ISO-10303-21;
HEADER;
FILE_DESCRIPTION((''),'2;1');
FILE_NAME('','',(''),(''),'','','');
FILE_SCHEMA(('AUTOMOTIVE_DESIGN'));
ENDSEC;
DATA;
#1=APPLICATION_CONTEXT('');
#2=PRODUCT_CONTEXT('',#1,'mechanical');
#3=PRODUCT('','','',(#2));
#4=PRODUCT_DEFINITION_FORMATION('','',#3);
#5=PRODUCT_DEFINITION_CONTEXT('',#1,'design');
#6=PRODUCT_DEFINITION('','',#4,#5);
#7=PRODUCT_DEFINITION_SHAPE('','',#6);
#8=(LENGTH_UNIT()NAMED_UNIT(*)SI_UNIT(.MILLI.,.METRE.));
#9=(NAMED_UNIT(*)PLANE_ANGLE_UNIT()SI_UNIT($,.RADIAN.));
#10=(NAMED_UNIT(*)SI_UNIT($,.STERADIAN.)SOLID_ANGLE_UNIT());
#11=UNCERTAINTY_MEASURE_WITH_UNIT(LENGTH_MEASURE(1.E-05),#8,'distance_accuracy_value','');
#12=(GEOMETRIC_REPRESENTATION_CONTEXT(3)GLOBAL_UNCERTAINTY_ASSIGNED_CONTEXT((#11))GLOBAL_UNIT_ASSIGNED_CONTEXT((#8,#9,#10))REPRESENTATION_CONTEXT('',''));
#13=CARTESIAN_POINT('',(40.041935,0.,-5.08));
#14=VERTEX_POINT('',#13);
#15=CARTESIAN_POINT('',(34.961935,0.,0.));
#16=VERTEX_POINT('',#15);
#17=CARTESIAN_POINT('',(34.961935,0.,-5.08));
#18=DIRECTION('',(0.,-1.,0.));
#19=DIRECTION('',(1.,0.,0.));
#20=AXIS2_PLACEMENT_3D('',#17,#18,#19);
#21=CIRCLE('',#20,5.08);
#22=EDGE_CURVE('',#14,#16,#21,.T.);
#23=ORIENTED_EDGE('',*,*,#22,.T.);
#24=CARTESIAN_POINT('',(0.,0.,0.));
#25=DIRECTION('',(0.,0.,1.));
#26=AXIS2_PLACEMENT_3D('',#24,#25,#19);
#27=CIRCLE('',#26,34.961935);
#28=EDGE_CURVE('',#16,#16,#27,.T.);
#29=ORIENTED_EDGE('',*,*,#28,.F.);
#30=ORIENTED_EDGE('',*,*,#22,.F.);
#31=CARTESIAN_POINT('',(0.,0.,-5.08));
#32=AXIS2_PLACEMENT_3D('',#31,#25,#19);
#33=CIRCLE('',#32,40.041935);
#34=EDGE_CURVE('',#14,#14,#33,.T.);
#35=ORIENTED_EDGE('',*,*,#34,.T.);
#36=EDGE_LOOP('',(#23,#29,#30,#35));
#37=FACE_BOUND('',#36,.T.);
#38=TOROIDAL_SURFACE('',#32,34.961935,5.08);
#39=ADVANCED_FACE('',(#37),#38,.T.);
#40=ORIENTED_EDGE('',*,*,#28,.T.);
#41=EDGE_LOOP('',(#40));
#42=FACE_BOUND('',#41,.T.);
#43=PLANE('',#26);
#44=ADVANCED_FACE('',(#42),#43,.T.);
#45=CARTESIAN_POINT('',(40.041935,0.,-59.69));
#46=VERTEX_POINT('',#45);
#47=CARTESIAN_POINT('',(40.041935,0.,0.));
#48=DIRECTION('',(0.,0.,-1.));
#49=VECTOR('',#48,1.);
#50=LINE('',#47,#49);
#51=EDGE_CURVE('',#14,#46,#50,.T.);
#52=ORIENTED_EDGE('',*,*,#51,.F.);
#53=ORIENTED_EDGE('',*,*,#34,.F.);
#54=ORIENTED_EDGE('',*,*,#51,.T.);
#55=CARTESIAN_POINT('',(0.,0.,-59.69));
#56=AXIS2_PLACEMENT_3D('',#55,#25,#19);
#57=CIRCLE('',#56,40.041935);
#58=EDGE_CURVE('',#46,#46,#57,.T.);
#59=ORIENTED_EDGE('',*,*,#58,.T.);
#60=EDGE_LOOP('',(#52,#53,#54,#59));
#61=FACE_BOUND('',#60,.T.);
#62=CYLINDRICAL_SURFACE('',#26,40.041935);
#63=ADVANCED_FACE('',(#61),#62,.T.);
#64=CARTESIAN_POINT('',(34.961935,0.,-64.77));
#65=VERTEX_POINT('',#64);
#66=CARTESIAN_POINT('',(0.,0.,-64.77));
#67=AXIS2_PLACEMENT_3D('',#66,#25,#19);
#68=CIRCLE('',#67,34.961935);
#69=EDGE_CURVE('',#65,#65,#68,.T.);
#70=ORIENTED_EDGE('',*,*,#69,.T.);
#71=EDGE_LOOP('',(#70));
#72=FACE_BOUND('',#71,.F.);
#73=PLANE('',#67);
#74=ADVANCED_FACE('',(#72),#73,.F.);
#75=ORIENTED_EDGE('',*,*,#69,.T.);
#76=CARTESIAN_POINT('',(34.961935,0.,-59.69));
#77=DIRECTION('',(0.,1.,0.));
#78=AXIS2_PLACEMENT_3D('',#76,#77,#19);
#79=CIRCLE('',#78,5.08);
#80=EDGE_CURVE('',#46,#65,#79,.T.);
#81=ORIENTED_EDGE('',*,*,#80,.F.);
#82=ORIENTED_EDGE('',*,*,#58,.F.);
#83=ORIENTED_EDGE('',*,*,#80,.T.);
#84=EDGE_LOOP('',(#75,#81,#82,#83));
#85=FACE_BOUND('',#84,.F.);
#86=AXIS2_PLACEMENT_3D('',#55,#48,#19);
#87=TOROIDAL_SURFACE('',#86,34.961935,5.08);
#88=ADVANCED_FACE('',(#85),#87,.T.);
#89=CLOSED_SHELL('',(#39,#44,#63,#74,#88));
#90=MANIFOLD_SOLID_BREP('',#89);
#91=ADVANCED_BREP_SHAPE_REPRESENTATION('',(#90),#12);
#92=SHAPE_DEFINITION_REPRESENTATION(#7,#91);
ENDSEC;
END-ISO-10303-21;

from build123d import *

# Parameters (mm, degrees)
F0_R     = 40.0419350947
F0_R_2   = 20.0959383488
F1_DEPTH = 64.77
F6_R     = 5.08


# Not quite as in the source:
# - the program builds the solid bodies; features that only make, move or delete a surface that nothing else refers to are left out


with BuildPart() as f1:
    # F0 (on Top) → F1 (new body)
    with BuildSketch(Plane.XY):
        Circle(F0_R)
        Circle(F0_R_2, mode=Mode.SUBTRACT)
        Circle(F0_R_2)
    extrude(amount=-F1_DEPTH)

    # F6
    f6_edges = [f1.edges().sort_by_distance(p)[0] for p in [
        (40.041935, 0, -32.385),
        (-40.041935, 0, 0),
        (-40.041935, 0, -64.77),
    ]]
    fillet(f6_edges, radius=F6_R)


solid = f1.part
